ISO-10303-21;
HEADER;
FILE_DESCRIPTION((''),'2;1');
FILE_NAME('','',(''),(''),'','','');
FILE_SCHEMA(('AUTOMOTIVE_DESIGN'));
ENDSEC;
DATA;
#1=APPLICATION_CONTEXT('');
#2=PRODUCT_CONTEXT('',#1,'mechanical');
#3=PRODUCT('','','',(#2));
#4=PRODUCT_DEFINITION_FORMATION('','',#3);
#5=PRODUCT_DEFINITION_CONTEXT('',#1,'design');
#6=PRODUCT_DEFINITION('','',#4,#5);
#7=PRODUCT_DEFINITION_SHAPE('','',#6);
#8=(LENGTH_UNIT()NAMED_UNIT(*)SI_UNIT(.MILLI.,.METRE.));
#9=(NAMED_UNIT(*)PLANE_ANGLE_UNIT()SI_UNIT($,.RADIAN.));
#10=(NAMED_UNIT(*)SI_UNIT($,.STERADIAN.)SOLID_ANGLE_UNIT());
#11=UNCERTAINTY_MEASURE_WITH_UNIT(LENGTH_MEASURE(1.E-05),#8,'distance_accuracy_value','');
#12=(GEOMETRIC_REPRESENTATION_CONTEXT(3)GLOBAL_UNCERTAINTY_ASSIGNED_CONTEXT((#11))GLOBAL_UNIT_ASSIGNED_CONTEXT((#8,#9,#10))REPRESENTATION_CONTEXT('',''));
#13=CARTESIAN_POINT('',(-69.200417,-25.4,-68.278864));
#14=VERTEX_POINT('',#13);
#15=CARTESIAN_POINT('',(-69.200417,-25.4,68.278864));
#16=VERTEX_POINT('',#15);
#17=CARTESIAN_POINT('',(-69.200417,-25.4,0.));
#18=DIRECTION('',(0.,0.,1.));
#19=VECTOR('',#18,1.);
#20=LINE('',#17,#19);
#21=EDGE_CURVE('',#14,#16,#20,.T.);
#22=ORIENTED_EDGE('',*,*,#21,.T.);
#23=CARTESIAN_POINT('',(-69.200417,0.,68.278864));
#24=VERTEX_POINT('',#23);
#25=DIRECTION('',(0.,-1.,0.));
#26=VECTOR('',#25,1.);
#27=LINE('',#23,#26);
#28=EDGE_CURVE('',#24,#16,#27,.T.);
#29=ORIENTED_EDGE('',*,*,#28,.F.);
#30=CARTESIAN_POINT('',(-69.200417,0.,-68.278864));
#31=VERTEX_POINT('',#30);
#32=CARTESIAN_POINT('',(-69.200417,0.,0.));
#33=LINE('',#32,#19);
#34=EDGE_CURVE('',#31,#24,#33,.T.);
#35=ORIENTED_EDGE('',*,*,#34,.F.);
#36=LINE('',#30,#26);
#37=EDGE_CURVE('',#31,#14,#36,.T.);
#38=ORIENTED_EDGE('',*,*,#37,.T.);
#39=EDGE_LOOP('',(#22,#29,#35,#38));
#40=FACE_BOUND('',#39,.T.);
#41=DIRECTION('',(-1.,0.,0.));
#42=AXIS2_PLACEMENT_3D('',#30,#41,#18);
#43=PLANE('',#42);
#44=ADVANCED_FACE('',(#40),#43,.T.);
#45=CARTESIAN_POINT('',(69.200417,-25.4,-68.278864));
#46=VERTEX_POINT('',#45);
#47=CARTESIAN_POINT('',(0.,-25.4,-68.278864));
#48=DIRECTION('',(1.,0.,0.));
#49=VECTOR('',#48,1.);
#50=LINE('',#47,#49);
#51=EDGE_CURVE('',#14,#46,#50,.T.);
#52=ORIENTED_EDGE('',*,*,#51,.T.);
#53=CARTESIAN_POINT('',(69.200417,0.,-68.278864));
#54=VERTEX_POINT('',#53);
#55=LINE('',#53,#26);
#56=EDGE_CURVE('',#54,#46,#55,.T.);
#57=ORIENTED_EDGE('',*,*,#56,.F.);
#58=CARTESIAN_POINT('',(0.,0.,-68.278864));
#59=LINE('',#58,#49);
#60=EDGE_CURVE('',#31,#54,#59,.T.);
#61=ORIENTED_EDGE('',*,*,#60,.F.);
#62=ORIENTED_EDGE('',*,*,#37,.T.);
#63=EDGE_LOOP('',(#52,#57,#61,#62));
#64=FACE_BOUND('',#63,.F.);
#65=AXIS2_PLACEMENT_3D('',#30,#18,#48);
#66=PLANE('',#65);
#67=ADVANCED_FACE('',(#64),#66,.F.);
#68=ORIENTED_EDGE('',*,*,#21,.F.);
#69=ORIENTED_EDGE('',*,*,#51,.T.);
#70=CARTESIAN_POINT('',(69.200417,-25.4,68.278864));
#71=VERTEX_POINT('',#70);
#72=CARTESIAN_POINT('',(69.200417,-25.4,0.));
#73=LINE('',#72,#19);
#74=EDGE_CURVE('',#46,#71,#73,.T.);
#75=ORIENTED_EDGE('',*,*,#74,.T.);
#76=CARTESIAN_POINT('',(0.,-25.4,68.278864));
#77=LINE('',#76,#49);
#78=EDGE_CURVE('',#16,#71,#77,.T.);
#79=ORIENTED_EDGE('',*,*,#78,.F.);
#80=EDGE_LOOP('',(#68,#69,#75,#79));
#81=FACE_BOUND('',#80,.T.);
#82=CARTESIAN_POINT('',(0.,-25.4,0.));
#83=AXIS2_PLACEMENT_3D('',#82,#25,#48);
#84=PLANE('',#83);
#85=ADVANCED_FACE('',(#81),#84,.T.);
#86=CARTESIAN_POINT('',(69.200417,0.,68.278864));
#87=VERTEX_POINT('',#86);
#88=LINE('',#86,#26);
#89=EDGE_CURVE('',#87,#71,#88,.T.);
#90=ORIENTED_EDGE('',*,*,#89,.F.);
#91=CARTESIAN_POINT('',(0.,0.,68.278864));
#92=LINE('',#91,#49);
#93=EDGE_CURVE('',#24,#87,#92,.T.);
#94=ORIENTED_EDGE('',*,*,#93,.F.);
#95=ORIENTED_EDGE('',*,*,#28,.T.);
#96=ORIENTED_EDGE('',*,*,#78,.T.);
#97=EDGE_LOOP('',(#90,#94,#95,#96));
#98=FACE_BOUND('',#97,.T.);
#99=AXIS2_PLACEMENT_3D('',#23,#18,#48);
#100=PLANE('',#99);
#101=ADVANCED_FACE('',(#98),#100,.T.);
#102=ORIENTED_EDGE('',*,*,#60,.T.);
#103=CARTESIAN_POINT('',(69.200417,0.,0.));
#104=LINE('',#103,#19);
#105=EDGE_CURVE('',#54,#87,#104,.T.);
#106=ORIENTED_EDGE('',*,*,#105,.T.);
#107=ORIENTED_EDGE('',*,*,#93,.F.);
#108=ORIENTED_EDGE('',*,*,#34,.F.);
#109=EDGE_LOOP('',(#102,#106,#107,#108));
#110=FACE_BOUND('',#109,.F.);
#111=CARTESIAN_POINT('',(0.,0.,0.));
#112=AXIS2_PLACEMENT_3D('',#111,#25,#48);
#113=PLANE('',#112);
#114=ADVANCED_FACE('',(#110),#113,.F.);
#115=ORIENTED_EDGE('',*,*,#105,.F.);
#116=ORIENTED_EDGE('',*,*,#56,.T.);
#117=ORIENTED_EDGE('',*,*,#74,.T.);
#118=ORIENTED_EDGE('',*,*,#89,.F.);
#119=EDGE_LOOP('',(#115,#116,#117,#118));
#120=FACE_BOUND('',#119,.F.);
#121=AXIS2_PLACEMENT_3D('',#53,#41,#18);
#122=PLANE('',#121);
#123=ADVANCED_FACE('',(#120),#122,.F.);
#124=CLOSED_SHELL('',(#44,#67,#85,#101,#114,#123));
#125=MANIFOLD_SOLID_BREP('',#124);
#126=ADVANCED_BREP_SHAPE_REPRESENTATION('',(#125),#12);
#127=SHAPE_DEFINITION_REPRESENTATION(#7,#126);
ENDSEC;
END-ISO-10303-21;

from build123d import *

# Parameters (mm, degrees)
F0_W     = 138.4008337424
F0_H     = 136.5577280521
F1_DEPTH = 25.4


# Not quite as in the source:
# - the program builds the solid bodies; features that only make, move or delete a surface that nothing else refers to are left out


with BuildPart() as f1:
    # F0 (on Front) → F1 (new body)
    with BuildSketch(Plane.XZ):
        Rectangle(F0_W, F0_H)
    extrude(amount=F1_DEPTH)


solid = f1.part
